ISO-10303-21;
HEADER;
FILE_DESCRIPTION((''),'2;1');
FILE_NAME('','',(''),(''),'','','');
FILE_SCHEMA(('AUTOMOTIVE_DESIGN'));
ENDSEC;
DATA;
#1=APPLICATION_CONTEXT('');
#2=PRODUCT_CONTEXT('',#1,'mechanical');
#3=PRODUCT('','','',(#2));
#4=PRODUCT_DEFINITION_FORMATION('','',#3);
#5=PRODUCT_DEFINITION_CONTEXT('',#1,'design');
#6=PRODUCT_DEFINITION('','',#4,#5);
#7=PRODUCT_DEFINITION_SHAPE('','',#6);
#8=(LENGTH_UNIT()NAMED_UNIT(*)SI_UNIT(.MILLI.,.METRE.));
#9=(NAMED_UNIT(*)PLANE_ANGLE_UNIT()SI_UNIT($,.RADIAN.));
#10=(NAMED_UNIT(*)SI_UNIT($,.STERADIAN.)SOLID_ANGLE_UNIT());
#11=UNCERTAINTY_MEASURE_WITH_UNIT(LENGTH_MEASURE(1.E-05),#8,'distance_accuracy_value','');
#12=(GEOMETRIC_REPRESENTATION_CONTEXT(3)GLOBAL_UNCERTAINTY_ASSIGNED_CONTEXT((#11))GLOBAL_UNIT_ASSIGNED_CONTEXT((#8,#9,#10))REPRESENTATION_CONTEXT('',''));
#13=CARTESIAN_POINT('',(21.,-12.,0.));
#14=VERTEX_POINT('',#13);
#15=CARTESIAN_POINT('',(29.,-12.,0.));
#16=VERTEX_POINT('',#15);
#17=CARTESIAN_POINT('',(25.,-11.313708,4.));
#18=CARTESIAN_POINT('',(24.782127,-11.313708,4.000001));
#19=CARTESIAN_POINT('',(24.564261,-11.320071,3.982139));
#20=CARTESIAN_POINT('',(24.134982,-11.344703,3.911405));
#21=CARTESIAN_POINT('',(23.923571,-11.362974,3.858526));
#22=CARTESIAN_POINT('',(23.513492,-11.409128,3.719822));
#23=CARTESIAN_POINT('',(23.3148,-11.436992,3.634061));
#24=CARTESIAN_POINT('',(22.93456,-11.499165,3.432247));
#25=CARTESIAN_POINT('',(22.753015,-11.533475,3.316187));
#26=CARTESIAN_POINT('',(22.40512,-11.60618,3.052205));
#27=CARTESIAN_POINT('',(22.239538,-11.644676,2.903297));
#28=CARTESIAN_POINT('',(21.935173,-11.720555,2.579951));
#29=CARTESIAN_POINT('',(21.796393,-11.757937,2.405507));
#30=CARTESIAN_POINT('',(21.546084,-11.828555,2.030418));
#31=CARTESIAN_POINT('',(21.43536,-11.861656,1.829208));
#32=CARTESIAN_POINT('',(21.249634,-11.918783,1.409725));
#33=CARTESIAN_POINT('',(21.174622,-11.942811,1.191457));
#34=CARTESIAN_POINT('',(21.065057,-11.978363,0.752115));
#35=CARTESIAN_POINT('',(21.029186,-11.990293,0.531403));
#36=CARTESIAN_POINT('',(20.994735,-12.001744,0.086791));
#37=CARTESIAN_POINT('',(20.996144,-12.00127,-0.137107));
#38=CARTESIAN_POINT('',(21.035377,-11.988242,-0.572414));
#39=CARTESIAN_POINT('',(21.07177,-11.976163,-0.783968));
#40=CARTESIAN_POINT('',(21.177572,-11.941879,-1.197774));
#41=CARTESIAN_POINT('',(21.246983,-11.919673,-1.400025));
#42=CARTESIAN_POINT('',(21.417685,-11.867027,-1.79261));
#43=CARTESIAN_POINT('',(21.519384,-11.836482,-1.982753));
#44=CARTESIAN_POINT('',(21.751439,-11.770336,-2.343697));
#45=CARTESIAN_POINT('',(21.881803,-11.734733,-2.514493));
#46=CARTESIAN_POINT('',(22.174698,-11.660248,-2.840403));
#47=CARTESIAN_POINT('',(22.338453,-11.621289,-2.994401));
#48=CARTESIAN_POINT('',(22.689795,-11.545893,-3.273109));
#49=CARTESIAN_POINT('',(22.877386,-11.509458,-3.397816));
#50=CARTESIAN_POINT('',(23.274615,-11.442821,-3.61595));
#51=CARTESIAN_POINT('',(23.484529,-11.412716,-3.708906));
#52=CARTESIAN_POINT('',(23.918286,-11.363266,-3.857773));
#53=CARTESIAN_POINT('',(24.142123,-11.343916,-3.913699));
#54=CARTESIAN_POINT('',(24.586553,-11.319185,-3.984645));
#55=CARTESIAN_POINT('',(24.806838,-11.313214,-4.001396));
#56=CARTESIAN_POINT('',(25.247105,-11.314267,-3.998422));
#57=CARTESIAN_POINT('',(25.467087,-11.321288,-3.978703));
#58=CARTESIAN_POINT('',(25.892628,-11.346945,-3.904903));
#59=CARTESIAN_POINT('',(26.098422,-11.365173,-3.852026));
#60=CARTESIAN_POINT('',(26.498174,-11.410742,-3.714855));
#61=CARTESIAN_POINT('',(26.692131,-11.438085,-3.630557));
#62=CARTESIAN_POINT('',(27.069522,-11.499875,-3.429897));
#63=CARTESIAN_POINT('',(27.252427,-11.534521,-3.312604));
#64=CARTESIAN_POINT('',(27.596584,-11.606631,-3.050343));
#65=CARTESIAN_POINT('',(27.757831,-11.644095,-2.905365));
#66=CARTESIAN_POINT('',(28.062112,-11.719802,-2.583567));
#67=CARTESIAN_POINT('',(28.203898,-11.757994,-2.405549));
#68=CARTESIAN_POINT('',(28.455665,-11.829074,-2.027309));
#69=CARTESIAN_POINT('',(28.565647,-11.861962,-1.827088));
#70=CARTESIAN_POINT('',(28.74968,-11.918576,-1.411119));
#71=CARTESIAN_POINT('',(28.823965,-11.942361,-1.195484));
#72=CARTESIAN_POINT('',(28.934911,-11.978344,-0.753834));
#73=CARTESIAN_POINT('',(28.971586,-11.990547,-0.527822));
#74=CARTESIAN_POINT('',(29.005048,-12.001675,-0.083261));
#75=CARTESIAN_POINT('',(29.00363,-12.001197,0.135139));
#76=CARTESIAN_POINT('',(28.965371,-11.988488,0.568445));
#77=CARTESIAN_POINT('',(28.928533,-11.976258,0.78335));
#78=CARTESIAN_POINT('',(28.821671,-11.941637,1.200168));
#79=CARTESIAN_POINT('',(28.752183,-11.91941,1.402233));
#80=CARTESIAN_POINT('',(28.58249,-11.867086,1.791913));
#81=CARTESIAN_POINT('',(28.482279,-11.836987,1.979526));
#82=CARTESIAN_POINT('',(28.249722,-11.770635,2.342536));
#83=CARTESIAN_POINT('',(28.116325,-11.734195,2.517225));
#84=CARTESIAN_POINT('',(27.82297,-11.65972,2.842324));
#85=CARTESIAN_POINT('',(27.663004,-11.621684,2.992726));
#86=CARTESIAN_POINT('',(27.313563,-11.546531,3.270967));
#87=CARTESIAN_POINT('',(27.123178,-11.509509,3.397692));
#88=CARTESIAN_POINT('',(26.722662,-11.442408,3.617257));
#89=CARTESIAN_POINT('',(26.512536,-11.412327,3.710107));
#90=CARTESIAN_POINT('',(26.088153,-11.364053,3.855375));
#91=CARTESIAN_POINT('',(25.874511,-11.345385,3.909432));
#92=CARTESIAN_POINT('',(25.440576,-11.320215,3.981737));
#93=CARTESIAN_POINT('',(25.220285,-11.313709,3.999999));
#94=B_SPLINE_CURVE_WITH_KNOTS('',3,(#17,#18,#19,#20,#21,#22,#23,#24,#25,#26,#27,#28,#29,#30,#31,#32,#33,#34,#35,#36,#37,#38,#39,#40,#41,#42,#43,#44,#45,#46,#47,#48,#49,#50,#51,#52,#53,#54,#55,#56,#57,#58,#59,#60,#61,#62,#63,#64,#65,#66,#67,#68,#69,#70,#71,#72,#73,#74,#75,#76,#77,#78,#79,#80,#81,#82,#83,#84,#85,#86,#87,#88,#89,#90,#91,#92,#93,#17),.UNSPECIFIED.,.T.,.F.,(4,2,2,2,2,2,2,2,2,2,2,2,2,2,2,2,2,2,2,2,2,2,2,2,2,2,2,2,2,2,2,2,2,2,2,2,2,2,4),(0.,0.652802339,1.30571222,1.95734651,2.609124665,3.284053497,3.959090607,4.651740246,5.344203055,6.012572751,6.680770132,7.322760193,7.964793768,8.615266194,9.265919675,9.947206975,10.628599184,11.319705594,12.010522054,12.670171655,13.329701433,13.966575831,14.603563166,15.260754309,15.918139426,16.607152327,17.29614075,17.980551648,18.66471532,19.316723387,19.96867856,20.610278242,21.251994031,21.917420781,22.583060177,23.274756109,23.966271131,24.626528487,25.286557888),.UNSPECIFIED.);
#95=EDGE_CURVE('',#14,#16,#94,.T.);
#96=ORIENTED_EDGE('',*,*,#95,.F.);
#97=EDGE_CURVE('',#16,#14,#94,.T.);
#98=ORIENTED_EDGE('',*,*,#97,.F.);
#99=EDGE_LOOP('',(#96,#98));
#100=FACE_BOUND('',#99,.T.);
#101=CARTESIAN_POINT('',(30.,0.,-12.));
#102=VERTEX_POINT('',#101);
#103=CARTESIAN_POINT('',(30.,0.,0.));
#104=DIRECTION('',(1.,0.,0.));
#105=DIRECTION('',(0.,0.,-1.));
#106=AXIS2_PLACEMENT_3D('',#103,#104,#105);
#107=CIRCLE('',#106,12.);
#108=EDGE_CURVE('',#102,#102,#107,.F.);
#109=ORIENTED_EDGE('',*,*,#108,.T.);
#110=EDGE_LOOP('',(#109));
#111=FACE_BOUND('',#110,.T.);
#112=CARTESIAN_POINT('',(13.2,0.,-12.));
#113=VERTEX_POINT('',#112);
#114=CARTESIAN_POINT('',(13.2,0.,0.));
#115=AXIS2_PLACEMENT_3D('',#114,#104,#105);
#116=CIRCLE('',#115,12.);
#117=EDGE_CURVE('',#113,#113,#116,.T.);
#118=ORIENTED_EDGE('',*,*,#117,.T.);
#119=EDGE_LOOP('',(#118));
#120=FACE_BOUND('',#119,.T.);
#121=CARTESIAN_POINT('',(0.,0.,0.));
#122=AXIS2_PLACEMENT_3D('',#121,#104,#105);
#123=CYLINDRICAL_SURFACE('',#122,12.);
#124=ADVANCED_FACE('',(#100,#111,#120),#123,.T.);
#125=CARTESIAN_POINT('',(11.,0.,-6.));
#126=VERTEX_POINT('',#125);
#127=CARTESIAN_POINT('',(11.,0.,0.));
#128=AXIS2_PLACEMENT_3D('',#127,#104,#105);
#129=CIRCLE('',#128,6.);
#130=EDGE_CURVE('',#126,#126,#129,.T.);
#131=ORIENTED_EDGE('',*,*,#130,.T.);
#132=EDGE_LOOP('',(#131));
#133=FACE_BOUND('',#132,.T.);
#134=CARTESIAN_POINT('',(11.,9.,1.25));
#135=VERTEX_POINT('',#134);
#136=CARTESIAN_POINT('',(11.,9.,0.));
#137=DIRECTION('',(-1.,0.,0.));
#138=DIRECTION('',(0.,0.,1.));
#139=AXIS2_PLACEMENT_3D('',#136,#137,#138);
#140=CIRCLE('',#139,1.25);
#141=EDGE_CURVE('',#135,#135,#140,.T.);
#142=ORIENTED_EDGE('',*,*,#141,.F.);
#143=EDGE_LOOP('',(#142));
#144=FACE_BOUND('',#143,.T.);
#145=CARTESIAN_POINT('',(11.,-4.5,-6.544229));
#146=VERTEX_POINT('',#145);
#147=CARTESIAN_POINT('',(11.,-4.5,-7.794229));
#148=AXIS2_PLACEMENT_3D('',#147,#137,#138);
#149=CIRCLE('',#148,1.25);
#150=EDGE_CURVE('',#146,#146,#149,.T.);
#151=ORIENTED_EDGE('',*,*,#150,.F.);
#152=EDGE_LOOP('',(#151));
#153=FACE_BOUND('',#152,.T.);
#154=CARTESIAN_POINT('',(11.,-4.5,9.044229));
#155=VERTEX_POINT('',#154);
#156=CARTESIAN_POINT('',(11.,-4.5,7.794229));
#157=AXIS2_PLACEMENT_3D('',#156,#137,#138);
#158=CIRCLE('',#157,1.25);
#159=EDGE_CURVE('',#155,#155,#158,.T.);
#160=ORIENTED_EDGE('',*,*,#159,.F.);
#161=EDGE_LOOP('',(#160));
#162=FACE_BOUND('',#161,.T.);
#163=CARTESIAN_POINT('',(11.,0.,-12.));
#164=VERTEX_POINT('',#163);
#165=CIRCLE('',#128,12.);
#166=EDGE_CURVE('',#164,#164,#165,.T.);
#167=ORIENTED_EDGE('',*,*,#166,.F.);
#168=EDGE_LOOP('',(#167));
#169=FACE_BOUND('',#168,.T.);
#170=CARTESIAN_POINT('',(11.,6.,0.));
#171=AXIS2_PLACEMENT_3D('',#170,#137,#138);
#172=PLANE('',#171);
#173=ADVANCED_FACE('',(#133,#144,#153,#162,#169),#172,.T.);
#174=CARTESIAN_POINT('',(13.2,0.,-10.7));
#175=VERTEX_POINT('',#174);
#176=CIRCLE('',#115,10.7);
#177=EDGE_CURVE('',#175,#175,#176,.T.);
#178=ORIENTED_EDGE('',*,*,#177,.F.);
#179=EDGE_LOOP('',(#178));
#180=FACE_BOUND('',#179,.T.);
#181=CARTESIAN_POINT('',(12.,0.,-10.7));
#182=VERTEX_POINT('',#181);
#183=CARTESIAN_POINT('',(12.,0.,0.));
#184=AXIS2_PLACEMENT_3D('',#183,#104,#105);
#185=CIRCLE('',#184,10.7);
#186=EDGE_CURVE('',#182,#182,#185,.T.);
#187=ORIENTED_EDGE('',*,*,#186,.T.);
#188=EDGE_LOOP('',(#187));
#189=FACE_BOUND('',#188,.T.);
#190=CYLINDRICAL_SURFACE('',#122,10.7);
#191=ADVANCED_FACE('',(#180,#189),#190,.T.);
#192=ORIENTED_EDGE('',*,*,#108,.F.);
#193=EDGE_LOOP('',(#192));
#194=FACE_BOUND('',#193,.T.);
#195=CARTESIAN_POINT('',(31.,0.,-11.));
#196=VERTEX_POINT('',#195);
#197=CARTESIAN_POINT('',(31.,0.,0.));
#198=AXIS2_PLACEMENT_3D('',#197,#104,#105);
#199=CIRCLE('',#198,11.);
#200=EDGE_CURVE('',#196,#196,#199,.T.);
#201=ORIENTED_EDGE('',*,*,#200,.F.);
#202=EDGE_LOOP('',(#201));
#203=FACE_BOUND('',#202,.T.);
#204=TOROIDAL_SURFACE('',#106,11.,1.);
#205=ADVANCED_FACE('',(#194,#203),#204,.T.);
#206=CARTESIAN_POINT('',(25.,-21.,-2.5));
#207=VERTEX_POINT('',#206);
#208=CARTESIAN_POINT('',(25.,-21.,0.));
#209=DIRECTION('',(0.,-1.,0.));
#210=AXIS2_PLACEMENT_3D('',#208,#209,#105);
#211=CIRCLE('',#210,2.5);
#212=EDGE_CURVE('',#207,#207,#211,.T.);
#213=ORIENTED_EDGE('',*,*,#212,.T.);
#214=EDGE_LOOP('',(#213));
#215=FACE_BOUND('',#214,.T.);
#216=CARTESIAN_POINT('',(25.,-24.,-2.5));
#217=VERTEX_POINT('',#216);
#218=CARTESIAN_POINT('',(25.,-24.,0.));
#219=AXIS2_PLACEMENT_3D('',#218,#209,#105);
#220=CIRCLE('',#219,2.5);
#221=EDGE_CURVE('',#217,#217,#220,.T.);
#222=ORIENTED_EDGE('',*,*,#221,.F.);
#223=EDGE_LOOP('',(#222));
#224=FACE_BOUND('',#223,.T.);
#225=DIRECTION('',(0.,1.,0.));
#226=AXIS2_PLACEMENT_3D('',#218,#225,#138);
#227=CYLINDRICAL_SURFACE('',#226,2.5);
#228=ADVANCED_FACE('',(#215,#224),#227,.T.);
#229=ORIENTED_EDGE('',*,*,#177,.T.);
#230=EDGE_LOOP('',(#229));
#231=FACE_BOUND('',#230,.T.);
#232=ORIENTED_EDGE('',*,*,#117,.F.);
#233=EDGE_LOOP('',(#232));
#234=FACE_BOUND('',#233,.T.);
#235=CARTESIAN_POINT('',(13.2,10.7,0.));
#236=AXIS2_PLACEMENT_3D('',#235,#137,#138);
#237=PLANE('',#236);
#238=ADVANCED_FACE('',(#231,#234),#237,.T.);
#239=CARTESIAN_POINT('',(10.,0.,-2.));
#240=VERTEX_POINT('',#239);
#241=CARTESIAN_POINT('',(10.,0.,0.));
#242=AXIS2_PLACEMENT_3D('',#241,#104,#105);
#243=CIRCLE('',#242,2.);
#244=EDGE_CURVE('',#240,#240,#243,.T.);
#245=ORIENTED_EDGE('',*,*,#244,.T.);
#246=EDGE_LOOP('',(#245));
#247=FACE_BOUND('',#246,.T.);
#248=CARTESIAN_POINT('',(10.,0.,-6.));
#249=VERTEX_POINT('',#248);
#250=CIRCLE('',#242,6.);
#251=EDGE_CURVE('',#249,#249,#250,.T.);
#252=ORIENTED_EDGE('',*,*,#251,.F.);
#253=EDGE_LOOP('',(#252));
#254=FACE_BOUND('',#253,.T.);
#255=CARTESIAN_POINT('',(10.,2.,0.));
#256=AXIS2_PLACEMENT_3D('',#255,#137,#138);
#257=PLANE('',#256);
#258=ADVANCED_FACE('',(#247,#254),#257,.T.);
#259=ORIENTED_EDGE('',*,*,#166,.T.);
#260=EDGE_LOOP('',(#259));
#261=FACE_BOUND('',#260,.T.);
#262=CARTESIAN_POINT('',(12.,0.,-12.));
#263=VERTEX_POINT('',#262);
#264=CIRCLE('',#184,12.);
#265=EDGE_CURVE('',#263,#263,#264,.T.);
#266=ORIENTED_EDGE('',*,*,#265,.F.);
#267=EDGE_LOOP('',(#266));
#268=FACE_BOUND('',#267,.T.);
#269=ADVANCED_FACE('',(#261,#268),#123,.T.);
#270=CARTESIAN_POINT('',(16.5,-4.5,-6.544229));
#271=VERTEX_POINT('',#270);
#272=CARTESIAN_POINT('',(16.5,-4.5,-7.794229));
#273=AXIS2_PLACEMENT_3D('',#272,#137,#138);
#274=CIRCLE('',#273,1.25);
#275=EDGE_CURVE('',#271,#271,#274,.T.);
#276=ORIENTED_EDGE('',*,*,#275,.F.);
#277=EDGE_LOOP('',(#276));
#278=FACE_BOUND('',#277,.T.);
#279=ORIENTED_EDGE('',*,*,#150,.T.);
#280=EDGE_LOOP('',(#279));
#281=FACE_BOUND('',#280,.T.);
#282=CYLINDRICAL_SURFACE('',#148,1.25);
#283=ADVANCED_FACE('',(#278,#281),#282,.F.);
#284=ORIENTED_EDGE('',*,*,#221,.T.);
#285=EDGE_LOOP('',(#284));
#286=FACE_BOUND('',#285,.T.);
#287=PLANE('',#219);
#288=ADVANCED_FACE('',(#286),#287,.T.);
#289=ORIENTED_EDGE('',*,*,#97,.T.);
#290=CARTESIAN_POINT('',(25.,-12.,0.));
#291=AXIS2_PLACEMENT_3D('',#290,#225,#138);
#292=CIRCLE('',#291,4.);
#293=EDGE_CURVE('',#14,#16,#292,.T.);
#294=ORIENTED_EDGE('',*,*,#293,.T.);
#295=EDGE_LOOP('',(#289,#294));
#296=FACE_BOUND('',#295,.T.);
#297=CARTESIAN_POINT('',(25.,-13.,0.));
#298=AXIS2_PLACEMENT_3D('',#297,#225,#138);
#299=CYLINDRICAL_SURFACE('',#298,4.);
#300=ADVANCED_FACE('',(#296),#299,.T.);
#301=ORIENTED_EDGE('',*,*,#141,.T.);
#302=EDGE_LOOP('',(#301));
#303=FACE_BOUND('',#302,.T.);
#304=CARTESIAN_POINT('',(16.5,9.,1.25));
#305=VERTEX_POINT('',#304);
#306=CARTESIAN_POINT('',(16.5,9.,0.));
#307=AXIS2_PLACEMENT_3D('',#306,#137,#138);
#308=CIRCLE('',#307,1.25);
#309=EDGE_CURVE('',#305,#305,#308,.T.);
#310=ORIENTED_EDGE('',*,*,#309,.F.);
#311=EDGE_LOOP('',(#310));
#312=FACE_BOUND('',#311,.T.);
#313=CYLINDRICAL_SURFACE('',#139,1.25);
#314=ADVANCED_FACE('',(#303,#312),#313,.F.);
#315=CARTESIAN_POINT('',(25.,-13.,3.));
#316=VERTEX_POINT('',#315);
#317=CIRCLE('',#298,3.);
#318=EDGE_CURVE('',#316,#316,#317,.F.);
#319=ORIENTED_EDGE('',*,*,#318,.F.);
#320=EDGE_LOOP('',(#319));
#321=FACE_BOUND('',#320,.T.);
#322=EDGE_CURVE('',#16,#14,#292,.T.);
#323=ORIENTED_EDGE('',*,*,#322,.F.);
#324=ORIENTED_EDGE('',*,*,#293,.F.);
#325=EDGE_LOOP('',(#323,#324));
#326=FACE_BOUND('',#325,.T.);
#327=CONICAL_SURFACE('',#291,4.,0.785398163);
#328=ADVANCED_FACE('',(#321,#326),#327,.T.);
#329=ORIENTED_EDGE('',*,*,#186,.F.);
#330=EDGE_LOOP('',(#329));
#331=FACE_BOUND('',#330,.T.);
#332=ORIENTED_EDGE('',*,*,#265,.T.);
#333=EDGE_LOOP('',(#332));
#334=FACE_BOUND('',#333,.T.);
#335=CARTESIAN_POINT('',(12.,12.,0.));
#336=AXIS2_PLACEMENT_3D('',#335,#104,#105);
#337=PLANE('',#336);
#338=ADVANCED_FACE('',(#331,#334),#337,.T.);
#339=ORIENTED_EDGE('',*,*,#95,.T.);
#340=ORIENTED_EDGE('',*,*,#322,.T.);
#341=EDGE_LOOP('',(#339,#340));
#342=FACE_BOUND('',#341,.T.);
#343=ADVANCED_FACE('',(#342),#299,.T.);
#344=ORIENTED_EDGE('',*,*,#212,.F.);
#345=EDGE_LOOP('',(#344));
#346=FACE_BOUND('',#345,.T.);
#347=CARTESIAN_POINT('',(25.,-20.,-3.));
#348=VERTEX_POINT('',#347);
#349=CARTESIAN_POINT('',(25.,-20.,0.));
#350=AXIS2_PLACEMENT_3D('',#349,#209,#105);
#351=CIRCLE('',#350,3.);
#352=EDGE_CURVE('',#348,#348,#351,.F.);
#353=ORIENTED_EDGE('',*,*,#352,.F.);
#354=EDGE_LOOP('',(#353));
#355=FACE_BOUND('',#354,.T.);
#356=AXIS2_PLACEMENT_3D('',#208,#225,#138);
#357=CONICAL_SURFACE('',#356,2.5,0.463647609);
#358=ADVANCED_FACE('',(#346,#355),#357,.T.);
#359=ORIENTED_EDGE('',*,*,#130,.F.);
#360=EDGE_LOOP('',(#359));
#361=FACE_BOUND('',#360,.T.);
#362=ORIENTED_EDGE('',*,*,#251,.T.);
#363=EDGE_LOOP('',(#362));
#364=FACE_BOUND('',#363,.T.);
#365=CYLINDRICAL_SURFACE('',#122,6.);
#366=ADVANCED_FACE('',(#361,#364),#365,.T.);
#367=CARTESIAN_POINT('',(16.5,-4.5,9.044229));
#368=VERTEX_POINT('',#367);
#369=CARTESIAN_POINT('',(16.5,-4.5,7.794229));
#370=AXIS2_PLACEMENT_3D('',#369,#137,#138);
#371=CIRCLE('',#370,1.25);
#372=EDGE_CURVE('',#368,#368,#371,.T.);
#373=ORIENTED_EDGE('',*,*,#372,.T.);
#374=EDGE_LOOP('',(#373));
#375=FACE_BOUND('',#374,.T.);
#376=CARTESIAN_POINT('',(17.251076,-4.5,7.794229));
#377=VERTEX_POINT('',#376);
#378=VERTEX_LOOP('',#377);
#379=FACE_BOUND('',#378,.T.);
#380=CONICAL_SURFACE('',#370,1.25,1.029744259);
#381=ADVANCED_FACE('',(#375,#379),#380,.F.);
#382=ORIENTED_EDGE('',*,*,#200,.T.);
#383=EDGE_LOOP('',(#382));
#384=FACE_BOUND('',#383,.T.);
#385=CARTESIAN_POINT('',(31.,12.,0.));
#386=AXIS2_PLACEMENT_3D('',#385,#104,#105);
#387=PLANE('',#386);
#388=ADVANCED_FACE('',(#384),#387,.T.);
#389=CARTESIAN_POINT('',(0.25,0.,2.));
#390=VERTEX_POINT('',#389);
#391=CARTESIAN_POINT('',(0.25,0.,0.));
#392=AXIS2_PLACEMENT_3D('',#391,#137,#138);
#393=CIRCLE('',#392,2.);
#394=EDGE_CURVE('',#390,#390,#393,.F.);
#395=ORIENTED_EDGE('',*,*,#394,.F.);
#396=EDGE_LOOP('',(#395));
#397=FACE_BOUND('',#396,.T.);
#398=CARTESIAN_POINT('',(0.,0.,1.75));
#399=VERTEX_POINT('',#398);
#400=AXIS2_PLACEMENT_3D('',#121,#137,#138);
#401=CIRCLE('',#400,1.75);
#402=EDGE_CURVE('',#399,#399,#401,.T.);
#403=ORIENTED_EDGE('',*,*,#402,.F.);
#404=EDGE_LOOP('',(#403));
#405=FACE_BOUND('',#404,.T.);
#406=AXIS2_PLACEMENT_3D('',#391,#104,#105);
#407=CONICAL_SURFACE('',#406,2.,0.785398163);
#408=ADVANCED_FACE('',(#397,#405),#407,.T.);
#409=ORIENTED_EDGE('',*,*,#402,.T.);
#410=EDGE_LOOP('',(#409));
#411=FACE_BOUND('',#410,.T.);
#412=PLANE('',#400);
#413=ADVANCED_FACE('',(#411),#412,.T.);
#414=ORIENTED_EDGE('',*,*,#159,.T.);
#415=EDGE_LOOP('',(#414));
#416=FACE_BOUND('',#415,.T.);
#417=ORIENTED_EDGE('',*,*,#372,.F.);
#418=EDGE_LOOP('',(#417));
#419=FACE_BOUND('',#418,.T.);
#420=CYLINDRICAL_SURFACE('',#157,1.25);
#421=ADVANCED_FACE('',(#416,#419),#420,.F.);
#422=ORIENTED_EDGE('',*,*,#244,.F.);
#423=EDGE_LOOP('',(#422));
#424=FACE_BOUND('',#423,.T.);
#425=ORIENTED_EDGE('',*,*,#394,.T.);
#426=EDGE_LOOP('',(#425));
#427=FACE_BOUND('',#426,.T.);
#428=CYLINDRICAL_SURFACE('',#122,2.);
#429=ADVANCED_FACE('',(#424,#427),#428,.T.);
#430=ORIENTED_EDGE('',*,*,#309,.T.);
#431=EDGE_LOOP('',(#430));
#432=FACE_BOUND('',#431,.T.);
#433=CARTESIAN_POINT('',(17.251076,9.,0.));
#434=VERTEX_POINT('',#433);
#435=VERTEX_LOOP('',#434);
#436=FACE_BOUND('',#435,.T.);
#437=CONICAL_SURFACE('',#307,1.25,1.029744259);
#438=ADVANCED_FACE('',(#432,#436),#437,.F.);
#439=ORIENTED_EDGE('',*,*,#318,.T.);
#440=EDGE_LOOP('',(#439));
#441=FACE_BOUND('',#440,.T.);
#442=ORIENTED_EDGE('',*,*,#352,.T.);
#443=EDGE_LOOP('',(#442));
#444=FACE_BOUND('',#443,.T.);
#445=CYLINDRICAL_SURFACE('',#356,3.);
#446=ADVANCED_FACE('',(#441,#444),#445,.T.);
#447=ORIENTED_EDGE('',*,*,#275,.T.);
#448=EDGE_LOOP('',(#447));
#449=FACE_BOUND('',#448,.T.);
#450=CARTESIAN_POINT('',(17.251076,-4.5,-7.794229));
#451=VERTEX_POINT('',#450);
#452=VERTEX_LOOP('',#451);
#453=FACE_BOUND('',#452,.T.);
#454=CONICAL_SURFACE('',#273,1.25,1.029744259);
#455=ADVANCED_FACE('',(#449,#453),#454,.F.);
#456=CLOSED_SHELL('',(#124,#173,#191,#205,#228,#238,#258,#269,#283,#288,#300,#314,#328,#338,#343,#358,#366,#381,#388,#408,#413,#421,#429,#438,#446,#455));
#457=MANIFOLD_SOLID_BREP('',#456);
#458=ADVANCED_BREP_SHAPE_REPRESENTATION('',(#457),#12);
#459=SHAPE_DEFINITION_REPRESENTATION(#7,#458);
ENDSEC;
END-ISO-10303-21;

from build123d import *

# Parameters (mm, degrees)
CHAMFER1_SIZE  = 0.25
FILLET1_R      = 1
SKETCH2_R      = 4
EXTRUDE1_DEPTH = 13
SKETCH3_R      = 3
EXTRUDE2_DEPTH = 8
SKETCH4_R      = 2.5
EXTRUDE3_DEPTH = 3
CHAMFER2_SIZE  = 1
CHAMFER3_SIZE2 = 0.5
CHAMFER3_SIZE  = 1
HOLEWZD1_D     = 2.5
HOLEWZD1_DEPTH = 5.5
HOLEWZD1_TIP   = 0.751075774


with BuildPart() as part:
    # Sketch1 → Revolve1 (revolve)
    with BuildSketch(Plane.XY, mode=Mode.PRIVATE) as revolve1_sk:
        Polygon((0, 0), (31, 0), (31, 12), (13.2, 12), (13.2, 10.7), (12, 10.7), (12, 12), (11, 12), (11, 6), (10, 6), (10, 2), (0, 2), align=None)
    revolve(revolve1_sk.sketch.rotate(Axis((0, 0, 0), (-1, 0, 0)), 90), axis=Axis((0, 0, 0), (-1, 0, 0)))

    # Chamfer1
    chamfer1_edges = [part.edges().sort_by_distance(p)[0] for p in [
        (0, 0, 2),
    ]]
    chamfer(chamfer1_edges, length=CHAMFER1_SIZE)

    # Fillet1
    fillet1_edges = [part.edges().sort_by_distance(p)[0] for p in [
        (31, 0, 12),
    ]]
    fillet(fillet1_edges, radius=FILLET1_R)

    # Sketch2 → Extrude1 (add)
    with BuildSketch(Plane(origin=(0, 0, 0), x_dir=(1, 0, 0), z_dir=(0, 1, 0))):
        with Locations(Location((25, 0, 0), (0, 0, 270))):
            Circle(SKETCH2_R)
    extrude(amount=-EXTRUDE1_DEPTH)

    # Sketch3 → Extrude2 (add)
    with BuildSketch(Plane.XZ.offset(13)):
        with Locations(Location((25, 0, 0), (0, 0, 90))):
            Circle(SKETCH3_R)
    extrude(amount=EXTRUDE2_DEPTH)

    # Sketch4 → Extrude3 (add)
    with BuildSketch(Plane.XZ.offset(21)):
        with Locations(Location((25, 0, 0), (0, 0, 270))):
            Circle(SKETCH4_R)
    extrude(amount=EXTRUDE3_DEPTH)

    # Chamfer2
    chamfer2_edges = [part.edges().sort_by_distance(p)[0] for p in [
        (25, -13, -4),
    ]]
    chamfer(chamfer2_edges, length=CHAMFER2_SIZE - 0.0001)  # a hair under: the kernel refuses the full size

    # Chamfer3
    chamfer3_edges = [part.edges().sort_by_distance(p)[0] for p in [
        (25, -21, -3),
    ]]
    chamfer3_side = [part.faces().sort_by_distance(p)[0] for p in [
        (25, -20.99, -3),
    ]]
    chamfer(chamfer3_edges, length=CHAMFER3_SIZE - 0.0001, length2=CHAMFER3_SIZE2 - 0.0001, reference=chamfer3_side[0])  # a hair under: the kernel refuses the full size

    # HoleWzd1
    with Locations(Plane.ZY.offset(-11)):
        with Locations((0, 9), (7.794228634, -4.5), (-7.794228634, -4.5)):
            Hole(HOLEWZD1_D / 2, depth=HOLEWZD1_DEPTH)
            with Locations((0, 0, -(HOLEWZD1_DEPTH + HOLEWZD1_TIP / 2))):  # 118° drill point
                Cone(0, HOLEWZD1_D / 2, HOLEWZD1_TIP, mode=Mode.SUBTRACT)


solid = part.part
